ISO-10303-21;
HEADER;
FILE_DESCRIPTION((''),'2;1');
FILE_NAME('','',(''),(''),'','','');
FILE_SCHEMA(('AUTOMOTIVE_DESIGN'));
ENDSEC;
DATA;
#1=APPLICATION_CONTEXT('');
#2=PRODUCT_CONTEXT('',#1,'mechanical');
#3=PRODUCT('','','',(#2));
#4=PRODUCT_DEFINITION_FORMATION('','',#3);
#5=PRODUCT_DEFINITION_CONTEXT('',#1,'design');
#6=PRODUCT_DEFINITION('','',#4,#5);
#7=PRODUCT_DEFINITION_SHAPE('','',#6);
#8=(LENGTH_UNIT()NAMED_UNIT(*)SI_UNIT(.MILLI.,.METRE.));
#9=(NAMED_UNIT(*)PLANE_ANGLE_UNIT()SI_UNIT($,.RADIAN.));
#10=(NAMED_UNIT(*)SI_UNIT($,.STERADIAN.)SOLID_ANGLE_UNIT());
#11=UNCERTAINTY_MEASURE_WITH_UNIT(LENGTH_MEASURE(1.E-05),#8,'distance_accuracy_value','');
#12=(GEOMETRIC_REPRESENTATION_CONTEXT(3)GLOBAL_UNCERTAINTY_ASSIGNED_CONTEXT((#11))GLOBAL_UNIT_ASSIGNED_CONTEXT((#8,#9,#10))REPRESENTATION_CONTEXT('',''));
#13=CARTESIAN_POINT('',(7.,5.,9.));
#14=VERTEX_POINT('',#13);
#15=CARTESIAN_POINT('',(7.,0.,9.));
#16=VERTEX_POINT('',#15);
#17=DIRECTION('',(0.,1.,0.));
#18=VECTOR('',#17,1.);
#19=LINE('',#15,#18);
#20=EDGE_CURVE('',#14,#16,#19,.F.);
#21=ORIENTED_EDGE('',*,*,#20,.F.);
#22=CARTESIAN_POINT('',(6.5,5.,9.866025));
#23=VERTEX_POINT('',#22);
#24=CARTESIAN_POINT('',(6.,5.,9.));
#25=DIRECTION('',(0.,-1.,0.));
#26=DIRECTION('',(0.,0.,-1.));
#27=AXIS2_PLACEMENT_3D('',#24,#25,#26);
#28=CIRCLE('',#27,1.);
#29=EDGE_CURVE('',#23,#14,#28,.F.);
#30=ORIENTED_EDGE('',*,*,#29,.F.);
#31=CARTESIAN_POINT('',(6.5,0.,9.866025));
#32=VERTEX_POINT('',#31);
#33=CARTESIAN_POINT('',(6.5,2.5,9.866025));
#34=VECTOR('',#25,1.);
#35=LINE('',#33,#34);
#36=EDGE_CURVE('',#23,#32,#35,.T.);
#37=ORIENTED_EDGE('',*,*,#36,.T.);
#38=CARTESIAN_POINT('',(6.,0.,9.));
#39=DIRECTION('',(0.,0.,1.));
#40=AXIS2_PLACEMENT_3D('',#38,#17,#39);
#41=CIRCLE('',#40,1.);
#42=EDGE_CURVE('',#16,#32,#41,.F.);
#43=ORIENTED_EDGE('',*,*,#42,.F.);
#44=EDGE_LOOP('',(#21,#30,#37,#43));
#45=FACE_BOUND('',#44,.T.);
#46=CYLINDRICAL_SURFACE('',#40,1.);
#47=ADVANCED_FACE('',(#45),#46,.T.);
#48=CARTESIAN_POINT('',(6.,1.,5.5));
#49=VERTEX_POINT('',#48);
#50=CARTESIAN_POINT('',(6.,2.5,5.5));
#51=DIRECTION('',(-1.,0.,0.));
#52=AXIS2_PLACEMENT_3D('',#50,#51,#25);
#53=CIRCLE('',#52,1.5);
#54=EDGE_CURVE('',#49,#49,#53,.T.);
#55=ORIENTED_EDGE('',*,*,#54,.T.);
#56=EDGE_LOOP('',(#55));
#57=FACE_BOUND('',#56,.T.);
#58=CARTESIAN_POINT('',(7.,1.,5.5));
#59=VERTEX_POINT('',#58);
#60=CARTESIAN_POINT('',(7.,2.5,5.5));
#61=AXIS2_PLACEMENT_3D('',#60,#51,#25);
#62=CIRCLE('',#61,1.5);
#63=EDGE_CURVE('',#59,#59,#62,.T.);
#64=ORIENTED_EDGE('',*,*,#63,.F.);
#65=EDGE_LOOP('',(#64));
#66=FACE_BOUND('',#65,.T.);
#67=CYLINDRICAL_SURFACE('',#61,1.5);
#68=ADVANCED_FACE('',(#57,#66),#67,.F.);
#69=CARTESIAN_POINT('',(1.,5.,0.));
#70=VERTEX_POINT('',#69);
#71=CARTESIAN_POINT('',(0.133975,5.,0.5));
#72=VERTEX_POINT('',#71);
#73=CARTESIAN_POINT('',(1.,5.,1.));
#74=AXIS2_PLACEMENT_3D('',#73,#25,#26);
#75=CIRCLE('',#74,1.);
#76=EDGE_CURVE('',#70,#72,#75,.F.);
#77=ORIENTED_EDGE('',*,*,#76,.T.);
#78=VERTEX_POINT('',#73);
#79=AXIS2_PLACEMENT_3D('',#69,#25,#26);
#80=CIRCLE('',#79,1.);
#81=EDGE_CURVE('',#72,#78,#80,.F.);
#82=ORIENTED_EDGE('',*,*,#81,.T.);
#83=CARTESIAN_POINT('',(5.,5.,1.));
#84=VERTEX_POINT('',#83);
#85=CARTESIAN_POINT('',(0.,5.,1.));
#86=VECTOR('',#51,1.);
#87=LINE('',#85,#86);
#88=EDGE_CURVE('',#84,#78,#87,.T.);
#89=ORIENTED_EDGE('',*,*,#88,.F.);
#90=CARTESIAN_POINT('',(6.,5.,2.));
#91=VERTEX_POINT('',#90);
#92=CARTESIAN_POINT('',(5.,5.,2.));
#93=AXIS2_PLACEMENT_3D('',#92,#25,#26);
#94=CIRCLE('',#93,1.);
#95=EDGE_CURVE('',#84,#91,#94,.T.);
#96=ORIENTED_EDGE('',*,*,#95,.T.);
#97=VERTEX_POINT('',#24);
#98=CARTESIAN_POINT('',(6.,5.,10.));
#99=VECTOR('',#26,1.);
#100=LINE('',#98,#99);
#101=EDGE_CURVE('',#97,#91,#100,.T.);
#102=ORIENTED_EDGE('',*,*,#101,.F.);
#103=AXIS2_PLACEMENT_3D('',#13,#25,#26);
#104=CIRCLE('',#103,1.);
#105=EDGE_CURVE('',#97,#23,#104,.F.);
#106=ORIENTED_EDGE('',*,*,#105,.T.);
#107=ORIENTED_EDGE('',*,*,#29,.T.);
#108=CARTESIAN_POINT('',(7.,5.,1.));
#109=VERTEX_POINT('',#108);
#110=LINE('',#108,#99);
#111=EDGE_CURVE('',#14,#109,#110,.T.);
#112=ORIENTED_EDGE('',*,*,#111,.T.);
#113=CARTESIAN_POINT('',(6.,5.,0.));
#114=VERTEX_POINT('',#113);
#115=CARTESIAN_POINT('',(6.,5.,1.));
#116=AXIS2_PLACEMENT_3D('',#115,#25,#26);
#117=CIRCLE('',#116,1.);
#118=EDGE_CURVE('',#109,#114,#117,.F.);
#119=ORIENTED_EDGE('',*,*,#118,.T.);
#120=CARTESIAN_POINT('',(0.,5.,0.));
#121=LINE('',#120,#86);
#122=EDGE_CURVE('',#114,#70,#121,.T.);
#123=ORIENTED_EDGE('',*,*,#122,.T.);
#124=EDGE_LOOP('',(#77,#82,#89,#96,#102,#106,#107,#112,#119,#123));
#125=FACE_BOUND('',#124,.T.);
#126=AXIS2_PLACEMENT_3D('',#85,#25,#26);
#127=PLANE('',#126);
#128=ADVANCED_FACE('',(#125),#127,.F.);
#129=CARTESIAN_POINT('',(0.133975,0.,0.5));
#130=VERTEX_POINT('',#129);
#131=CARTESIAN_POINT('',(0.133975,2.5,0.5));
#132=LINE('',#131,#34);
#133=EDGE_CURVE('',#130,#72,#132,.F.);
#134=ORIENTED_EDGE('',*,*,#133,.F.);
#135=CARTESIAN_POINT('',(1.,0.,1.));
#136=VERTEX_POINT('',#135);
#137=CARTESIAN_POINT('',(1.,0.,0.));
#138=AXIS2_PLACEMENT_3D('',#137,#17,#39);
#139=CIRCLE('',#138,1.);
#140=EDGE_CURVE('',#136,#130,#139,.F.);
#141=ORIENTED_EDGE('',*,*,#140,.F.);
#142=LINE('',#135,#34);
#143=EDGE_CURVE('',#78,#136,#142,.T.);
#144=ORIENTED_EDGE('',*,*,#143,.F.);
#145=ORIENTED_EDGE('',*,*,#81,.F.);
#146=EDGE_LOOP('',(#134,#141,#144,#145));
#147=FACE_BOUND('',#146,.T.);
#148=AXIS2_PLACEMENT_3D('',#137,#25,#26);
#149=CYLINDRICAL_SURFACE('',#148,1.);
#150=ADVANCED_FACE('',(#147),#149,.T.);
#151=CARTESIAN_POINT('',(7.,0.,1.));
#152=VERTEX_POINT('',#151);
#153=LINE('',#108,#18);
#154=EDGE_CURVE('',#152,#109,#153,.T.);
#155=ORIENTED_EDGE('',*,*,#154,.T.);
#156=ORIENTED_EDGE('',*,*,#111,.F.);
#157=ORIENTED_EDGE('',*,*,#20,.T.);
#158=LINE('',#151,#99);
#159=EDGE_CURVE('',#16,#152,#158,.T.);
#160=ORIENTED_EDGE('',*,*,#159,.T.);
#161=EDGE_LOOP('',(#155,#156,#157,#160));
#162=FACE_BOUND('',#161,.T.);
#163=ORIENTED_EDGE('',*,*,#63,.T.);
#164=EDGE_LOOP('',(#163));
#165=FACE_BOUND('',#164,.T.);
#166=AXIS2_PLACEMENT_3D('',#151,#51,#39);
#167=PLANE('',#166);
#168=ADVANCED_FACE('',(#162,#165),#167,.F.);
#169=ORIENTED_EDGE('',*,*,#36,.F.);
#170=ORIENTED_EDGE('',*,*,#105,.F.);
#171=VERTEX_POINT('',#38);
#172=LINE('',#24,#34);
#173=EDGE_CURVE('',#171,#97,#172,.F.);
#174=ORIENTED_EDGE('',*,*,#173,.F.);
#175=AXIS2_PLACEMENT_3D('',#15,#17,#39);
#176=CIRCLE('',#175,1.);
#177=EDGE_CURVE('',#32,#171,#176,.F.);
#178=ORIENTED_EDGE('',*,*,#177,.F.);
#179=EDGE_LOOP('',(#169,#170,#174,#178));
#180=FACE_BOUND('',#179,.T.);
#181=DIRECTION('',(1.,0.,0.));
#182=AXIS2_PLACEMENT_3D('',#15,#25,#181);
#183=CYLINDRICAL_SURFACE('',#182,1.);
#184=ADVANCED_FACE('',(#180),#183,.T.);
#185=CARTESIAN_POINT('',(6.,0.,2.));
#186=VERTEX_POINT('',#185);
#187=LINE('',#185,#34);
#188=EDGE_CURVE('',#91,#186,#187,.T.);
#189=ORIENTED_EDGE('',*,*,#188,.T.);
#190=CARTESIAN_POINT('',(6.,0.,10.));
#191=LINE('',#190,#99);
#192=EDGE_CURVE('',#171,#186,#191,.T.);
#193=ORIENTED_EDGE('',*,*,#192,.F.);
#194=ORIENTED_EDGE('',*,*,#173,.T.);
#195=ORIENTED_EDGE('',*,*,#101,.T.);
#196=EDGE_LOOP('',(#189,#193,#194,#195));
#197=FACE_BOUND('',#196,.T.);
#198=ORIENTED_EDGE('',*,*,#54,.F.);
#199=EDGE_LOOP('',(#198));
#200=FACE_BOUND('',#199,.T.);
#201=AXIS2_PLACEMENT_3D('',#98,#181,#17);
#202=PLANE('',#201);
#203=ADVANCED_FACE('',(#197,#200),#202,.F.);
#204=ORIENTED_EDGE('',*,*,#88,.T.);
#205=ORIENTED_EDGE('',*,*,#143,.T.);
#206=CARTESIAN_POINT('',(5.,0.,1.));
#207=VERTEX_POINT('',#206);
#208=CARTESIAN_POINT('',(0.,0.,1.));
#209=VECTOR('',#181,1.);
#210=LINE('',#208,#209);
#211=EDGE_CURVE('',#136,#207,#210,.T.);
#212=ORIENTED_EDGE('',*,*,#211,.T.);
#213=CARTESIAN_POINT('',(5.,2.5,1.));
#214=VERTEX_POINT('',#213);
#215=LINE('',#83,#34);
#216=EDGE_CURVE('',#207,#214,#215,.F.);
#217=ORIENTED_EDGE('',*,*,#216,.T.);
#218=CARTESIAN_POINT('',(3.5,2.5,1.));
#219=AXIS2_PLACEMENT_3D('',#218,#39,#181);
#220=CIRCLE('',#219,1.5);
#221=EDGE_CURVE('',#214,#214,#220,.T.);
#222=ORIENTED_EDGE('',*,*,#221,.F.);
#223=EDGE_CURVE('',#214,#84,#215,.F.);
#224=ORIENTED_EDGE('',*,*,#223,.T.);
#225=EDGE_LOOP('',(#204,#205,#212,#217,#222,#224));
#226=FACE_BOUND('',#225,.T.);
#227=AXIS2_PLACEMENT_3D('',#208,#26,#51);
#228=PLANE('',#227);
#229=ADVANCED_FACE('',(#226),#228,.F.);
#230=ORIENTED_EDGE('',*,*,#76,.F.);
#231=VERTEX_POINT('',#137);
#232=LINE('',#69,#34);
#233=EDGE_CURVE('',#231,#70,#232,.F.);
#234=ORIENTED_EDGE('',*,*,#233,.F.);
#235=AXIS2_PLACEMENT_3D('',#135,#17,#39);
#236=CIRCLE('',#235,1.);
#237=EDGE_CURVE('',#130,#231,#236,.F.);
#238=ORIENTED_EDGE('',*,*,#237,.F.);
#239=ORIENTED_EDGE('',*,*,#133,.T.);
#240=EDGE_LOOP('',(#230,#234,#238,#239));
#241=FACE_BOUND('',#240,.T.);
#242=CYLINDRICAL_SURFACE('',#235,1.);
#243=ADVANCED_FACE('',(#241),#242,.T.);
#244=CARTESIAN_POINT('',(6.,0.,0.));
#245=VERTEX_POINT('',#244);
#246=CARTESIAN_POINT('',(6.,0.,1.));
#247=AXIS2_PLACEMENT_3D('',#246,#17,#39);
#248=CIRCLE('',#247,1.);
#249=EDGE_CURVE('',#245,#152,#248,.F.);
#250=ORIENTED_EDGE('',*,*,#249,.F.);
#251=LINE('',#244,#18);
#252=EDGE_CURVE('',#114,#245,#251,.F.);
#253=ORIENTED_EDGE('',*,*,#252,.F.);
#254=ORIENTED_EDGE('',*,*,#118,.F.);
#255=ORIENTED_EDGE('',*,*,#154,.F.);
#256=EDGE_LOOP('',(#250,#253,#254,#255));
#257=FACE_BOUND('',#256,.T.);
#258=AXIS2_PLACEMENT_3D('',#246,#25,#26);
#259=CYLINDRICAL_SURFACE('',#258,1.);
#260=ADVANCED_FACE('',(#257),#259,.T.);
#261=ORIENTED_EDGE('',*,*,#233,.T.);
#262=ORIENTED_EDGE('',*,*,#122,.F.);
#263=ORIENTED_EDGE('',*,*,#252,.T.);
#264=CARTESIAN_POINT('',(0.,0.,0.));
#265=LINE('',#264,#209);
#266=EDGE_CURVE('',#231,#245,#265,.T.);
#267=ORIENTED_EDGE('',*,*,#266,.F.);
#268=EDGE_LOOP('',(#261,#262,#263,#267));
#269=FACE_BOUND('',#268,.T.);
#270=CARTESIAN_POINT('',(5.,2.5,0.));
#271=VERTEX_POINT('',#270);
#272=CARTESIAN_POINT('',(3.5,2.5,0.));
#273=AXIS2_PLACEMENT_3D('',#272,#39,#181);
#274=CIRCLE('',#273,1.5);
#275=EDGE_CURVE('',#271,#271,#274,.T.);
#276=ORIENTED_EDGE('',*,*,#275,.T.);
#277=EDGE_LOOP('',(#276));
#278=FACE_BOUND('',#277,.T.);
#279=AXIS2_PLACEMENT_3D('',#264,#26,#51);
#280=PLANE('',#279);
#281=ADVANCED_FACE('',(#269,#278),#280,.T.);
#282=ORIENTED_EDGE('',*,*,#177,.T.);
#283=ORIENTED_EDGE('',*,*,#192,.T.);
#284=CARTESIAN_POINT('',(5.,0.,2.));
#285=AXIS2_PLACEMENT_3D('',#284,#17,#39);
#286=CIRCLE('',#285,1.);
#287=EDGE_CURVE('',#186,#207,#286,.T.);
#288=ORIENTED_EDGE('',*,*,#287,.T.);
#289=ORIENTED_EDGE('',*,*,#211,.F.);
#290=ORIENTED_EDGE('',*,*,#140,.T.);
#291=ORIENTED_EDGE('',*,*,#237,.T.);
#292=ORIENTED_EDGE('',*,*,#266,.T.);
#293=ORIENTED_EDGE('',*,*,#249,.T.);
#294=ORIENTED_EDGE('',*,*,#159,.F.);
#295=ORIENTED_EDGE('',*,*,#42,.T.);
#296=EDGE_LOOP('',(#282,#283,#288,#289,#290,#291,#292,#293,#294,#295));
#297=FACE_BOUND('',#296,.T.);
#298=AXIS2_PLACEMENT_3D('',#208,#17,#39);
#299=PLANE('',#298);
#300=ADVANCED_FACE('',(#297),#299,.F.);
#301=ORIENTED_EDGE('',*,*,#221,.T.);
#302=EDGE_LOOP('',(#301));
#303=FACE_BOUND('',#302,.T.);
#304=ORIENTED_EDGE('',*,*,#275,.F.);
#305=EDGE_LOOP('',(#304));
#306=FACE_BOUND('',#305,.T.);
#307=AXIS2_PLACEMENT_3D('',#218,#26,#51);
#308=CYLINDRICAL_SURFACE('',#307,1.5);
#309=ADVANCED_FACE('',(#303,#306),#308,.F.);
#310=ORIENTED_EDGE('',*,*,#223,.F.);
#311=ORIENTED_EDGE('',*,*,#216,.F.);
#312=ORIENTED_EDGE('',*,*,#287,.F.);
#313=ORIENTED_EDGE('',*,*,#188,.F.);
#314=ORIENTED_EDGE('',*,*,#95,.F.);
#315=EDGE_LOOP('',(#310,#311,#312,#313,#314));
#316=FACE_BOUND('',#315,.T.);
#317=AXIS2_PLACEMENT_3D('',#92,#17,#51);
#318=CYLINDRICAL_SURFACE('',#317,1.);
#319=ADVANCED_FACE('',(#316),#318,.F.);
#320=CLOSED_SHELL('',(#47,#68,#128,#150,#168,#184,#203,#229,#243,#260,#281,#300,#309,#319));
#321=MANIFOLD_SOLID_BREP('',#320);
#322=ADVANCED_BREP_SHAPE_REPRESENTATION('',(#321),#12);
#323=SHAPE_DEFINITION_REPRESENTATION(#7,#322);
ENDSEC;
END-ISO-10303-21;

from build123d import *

# Parameters (mm, degrees)
SKETCH1_W           = 7
SKETCH1_H           = 5
SKETCH1_R           = 1.5
BOSS_EXTRUDE1_DEPTH = 1
SKETCH2_W           = 1
SKETCH2_H           = 5
BOSS_EXTRUDE2_DEPTH = 9
SKETCH3_R           = 1.5
CUT_EXTRUDE1_DEPTH  = 1
FILLET1_R           = 1
FILLET2_R           = 1
FILLET3_R           = 1


# Some blends are built 0.0001 mm under size
with BuildPart() as part:
    # Sketch1 → Boss-Extrude1 (new body)
    with BuildSketch(Plane.XY):
        with Locations((3.5, 2.5)):
            Rectangle(SKETCH1_W, SKETCH1_H)
        with Locations((3.5, 2.5)):
            Circle(SKETCH1_R, mode=Mode.SUBTRACT)
    extrude(amount=BOSS_EXTRUDE1_DEPTH)

    # Sketch2 → Boss-Extrude2 (add)
    with BuildSketch(Plane.XY.offset(1)):
        with Locations((6.5, 2.5)):
            Rectangle(SKETCH2_W, SKETCH2_H)
    extrude(amount=BOSS_EXTRUDE2_DEPTH)

    # Sketch3 → Cut-Extrude1 (cut)
    with BuildSketch(Plane.ZY.offset(-6)):
        with Locations(Location((5.5, 2.5, 0), (0, 0, 270))):
            Circle(SKETCH3_R)
    extrude(amount=-CUT_EXTRUDE1_DEPTH, mode=Mode.SUBTRACT)

    # Fillet1
    fillet1_edges = [part.edges().sort_by_distance(p)[0] for p in [
        (6, 2.5, 1),
    ]]
    fillet(fillet1_edges, radius=FILLET1_R - 0.0001)  # a hair under: the kernel refuses the full size

    # Fillet2
    # the kernel refuses this fillet: 1 mm, written as the material it takes off along each edge
    with BuildSketch(Plane(origin=(7, -2.5, 10), x_dir=(-1, 0, 0), z_dir=(0, 1, 0)), Plane(origin=(0, 7.5, 0), x_dir=(0, 0, 1), z_dir=(0, -1, 0)), Plane(origin=(0, 7.5, 1), x_dir=(1, 0, 0), z_dir=(0, -1, 0))) as fillet2_piece_1:
        with BuildLine():
            CenterArc((FILLET2_R, -FILLET2_R), FILLET2_R, 90, 90)
            Line((0, -FILLET2_R), (0, 0))
            Line((0, 0), (FILLET2_R, 0))
        make_face()
    extrude(amount=10, mode=Mode.SUBTRACT)
    with BuildSketch(Plane(origin=(6, 7.5, 10), x_dir=(0, 0, -1), z_dir=(0, -1, 0))) as fillet2_piece_2:
        with BuildLine():
            CenterArc((FILLET2_R, FILLET2_R), FILLET2_R, 180, 90)
            Line((0, FILLET2_R), (0, 0))
            Line((0, 0), (FILLET2_R, 0))
        make_face()
    extrude(amount=10, mode=Mode.SUBTRACT)

    # Fillet3
    fillet3_edges = [part.edges().sort_by_distance(p)[0] for p in [
        (7, 2.5, 0),
    ]]
    fillet(fillet3_edges, radius=FILLET3_R)


solid = part.part
